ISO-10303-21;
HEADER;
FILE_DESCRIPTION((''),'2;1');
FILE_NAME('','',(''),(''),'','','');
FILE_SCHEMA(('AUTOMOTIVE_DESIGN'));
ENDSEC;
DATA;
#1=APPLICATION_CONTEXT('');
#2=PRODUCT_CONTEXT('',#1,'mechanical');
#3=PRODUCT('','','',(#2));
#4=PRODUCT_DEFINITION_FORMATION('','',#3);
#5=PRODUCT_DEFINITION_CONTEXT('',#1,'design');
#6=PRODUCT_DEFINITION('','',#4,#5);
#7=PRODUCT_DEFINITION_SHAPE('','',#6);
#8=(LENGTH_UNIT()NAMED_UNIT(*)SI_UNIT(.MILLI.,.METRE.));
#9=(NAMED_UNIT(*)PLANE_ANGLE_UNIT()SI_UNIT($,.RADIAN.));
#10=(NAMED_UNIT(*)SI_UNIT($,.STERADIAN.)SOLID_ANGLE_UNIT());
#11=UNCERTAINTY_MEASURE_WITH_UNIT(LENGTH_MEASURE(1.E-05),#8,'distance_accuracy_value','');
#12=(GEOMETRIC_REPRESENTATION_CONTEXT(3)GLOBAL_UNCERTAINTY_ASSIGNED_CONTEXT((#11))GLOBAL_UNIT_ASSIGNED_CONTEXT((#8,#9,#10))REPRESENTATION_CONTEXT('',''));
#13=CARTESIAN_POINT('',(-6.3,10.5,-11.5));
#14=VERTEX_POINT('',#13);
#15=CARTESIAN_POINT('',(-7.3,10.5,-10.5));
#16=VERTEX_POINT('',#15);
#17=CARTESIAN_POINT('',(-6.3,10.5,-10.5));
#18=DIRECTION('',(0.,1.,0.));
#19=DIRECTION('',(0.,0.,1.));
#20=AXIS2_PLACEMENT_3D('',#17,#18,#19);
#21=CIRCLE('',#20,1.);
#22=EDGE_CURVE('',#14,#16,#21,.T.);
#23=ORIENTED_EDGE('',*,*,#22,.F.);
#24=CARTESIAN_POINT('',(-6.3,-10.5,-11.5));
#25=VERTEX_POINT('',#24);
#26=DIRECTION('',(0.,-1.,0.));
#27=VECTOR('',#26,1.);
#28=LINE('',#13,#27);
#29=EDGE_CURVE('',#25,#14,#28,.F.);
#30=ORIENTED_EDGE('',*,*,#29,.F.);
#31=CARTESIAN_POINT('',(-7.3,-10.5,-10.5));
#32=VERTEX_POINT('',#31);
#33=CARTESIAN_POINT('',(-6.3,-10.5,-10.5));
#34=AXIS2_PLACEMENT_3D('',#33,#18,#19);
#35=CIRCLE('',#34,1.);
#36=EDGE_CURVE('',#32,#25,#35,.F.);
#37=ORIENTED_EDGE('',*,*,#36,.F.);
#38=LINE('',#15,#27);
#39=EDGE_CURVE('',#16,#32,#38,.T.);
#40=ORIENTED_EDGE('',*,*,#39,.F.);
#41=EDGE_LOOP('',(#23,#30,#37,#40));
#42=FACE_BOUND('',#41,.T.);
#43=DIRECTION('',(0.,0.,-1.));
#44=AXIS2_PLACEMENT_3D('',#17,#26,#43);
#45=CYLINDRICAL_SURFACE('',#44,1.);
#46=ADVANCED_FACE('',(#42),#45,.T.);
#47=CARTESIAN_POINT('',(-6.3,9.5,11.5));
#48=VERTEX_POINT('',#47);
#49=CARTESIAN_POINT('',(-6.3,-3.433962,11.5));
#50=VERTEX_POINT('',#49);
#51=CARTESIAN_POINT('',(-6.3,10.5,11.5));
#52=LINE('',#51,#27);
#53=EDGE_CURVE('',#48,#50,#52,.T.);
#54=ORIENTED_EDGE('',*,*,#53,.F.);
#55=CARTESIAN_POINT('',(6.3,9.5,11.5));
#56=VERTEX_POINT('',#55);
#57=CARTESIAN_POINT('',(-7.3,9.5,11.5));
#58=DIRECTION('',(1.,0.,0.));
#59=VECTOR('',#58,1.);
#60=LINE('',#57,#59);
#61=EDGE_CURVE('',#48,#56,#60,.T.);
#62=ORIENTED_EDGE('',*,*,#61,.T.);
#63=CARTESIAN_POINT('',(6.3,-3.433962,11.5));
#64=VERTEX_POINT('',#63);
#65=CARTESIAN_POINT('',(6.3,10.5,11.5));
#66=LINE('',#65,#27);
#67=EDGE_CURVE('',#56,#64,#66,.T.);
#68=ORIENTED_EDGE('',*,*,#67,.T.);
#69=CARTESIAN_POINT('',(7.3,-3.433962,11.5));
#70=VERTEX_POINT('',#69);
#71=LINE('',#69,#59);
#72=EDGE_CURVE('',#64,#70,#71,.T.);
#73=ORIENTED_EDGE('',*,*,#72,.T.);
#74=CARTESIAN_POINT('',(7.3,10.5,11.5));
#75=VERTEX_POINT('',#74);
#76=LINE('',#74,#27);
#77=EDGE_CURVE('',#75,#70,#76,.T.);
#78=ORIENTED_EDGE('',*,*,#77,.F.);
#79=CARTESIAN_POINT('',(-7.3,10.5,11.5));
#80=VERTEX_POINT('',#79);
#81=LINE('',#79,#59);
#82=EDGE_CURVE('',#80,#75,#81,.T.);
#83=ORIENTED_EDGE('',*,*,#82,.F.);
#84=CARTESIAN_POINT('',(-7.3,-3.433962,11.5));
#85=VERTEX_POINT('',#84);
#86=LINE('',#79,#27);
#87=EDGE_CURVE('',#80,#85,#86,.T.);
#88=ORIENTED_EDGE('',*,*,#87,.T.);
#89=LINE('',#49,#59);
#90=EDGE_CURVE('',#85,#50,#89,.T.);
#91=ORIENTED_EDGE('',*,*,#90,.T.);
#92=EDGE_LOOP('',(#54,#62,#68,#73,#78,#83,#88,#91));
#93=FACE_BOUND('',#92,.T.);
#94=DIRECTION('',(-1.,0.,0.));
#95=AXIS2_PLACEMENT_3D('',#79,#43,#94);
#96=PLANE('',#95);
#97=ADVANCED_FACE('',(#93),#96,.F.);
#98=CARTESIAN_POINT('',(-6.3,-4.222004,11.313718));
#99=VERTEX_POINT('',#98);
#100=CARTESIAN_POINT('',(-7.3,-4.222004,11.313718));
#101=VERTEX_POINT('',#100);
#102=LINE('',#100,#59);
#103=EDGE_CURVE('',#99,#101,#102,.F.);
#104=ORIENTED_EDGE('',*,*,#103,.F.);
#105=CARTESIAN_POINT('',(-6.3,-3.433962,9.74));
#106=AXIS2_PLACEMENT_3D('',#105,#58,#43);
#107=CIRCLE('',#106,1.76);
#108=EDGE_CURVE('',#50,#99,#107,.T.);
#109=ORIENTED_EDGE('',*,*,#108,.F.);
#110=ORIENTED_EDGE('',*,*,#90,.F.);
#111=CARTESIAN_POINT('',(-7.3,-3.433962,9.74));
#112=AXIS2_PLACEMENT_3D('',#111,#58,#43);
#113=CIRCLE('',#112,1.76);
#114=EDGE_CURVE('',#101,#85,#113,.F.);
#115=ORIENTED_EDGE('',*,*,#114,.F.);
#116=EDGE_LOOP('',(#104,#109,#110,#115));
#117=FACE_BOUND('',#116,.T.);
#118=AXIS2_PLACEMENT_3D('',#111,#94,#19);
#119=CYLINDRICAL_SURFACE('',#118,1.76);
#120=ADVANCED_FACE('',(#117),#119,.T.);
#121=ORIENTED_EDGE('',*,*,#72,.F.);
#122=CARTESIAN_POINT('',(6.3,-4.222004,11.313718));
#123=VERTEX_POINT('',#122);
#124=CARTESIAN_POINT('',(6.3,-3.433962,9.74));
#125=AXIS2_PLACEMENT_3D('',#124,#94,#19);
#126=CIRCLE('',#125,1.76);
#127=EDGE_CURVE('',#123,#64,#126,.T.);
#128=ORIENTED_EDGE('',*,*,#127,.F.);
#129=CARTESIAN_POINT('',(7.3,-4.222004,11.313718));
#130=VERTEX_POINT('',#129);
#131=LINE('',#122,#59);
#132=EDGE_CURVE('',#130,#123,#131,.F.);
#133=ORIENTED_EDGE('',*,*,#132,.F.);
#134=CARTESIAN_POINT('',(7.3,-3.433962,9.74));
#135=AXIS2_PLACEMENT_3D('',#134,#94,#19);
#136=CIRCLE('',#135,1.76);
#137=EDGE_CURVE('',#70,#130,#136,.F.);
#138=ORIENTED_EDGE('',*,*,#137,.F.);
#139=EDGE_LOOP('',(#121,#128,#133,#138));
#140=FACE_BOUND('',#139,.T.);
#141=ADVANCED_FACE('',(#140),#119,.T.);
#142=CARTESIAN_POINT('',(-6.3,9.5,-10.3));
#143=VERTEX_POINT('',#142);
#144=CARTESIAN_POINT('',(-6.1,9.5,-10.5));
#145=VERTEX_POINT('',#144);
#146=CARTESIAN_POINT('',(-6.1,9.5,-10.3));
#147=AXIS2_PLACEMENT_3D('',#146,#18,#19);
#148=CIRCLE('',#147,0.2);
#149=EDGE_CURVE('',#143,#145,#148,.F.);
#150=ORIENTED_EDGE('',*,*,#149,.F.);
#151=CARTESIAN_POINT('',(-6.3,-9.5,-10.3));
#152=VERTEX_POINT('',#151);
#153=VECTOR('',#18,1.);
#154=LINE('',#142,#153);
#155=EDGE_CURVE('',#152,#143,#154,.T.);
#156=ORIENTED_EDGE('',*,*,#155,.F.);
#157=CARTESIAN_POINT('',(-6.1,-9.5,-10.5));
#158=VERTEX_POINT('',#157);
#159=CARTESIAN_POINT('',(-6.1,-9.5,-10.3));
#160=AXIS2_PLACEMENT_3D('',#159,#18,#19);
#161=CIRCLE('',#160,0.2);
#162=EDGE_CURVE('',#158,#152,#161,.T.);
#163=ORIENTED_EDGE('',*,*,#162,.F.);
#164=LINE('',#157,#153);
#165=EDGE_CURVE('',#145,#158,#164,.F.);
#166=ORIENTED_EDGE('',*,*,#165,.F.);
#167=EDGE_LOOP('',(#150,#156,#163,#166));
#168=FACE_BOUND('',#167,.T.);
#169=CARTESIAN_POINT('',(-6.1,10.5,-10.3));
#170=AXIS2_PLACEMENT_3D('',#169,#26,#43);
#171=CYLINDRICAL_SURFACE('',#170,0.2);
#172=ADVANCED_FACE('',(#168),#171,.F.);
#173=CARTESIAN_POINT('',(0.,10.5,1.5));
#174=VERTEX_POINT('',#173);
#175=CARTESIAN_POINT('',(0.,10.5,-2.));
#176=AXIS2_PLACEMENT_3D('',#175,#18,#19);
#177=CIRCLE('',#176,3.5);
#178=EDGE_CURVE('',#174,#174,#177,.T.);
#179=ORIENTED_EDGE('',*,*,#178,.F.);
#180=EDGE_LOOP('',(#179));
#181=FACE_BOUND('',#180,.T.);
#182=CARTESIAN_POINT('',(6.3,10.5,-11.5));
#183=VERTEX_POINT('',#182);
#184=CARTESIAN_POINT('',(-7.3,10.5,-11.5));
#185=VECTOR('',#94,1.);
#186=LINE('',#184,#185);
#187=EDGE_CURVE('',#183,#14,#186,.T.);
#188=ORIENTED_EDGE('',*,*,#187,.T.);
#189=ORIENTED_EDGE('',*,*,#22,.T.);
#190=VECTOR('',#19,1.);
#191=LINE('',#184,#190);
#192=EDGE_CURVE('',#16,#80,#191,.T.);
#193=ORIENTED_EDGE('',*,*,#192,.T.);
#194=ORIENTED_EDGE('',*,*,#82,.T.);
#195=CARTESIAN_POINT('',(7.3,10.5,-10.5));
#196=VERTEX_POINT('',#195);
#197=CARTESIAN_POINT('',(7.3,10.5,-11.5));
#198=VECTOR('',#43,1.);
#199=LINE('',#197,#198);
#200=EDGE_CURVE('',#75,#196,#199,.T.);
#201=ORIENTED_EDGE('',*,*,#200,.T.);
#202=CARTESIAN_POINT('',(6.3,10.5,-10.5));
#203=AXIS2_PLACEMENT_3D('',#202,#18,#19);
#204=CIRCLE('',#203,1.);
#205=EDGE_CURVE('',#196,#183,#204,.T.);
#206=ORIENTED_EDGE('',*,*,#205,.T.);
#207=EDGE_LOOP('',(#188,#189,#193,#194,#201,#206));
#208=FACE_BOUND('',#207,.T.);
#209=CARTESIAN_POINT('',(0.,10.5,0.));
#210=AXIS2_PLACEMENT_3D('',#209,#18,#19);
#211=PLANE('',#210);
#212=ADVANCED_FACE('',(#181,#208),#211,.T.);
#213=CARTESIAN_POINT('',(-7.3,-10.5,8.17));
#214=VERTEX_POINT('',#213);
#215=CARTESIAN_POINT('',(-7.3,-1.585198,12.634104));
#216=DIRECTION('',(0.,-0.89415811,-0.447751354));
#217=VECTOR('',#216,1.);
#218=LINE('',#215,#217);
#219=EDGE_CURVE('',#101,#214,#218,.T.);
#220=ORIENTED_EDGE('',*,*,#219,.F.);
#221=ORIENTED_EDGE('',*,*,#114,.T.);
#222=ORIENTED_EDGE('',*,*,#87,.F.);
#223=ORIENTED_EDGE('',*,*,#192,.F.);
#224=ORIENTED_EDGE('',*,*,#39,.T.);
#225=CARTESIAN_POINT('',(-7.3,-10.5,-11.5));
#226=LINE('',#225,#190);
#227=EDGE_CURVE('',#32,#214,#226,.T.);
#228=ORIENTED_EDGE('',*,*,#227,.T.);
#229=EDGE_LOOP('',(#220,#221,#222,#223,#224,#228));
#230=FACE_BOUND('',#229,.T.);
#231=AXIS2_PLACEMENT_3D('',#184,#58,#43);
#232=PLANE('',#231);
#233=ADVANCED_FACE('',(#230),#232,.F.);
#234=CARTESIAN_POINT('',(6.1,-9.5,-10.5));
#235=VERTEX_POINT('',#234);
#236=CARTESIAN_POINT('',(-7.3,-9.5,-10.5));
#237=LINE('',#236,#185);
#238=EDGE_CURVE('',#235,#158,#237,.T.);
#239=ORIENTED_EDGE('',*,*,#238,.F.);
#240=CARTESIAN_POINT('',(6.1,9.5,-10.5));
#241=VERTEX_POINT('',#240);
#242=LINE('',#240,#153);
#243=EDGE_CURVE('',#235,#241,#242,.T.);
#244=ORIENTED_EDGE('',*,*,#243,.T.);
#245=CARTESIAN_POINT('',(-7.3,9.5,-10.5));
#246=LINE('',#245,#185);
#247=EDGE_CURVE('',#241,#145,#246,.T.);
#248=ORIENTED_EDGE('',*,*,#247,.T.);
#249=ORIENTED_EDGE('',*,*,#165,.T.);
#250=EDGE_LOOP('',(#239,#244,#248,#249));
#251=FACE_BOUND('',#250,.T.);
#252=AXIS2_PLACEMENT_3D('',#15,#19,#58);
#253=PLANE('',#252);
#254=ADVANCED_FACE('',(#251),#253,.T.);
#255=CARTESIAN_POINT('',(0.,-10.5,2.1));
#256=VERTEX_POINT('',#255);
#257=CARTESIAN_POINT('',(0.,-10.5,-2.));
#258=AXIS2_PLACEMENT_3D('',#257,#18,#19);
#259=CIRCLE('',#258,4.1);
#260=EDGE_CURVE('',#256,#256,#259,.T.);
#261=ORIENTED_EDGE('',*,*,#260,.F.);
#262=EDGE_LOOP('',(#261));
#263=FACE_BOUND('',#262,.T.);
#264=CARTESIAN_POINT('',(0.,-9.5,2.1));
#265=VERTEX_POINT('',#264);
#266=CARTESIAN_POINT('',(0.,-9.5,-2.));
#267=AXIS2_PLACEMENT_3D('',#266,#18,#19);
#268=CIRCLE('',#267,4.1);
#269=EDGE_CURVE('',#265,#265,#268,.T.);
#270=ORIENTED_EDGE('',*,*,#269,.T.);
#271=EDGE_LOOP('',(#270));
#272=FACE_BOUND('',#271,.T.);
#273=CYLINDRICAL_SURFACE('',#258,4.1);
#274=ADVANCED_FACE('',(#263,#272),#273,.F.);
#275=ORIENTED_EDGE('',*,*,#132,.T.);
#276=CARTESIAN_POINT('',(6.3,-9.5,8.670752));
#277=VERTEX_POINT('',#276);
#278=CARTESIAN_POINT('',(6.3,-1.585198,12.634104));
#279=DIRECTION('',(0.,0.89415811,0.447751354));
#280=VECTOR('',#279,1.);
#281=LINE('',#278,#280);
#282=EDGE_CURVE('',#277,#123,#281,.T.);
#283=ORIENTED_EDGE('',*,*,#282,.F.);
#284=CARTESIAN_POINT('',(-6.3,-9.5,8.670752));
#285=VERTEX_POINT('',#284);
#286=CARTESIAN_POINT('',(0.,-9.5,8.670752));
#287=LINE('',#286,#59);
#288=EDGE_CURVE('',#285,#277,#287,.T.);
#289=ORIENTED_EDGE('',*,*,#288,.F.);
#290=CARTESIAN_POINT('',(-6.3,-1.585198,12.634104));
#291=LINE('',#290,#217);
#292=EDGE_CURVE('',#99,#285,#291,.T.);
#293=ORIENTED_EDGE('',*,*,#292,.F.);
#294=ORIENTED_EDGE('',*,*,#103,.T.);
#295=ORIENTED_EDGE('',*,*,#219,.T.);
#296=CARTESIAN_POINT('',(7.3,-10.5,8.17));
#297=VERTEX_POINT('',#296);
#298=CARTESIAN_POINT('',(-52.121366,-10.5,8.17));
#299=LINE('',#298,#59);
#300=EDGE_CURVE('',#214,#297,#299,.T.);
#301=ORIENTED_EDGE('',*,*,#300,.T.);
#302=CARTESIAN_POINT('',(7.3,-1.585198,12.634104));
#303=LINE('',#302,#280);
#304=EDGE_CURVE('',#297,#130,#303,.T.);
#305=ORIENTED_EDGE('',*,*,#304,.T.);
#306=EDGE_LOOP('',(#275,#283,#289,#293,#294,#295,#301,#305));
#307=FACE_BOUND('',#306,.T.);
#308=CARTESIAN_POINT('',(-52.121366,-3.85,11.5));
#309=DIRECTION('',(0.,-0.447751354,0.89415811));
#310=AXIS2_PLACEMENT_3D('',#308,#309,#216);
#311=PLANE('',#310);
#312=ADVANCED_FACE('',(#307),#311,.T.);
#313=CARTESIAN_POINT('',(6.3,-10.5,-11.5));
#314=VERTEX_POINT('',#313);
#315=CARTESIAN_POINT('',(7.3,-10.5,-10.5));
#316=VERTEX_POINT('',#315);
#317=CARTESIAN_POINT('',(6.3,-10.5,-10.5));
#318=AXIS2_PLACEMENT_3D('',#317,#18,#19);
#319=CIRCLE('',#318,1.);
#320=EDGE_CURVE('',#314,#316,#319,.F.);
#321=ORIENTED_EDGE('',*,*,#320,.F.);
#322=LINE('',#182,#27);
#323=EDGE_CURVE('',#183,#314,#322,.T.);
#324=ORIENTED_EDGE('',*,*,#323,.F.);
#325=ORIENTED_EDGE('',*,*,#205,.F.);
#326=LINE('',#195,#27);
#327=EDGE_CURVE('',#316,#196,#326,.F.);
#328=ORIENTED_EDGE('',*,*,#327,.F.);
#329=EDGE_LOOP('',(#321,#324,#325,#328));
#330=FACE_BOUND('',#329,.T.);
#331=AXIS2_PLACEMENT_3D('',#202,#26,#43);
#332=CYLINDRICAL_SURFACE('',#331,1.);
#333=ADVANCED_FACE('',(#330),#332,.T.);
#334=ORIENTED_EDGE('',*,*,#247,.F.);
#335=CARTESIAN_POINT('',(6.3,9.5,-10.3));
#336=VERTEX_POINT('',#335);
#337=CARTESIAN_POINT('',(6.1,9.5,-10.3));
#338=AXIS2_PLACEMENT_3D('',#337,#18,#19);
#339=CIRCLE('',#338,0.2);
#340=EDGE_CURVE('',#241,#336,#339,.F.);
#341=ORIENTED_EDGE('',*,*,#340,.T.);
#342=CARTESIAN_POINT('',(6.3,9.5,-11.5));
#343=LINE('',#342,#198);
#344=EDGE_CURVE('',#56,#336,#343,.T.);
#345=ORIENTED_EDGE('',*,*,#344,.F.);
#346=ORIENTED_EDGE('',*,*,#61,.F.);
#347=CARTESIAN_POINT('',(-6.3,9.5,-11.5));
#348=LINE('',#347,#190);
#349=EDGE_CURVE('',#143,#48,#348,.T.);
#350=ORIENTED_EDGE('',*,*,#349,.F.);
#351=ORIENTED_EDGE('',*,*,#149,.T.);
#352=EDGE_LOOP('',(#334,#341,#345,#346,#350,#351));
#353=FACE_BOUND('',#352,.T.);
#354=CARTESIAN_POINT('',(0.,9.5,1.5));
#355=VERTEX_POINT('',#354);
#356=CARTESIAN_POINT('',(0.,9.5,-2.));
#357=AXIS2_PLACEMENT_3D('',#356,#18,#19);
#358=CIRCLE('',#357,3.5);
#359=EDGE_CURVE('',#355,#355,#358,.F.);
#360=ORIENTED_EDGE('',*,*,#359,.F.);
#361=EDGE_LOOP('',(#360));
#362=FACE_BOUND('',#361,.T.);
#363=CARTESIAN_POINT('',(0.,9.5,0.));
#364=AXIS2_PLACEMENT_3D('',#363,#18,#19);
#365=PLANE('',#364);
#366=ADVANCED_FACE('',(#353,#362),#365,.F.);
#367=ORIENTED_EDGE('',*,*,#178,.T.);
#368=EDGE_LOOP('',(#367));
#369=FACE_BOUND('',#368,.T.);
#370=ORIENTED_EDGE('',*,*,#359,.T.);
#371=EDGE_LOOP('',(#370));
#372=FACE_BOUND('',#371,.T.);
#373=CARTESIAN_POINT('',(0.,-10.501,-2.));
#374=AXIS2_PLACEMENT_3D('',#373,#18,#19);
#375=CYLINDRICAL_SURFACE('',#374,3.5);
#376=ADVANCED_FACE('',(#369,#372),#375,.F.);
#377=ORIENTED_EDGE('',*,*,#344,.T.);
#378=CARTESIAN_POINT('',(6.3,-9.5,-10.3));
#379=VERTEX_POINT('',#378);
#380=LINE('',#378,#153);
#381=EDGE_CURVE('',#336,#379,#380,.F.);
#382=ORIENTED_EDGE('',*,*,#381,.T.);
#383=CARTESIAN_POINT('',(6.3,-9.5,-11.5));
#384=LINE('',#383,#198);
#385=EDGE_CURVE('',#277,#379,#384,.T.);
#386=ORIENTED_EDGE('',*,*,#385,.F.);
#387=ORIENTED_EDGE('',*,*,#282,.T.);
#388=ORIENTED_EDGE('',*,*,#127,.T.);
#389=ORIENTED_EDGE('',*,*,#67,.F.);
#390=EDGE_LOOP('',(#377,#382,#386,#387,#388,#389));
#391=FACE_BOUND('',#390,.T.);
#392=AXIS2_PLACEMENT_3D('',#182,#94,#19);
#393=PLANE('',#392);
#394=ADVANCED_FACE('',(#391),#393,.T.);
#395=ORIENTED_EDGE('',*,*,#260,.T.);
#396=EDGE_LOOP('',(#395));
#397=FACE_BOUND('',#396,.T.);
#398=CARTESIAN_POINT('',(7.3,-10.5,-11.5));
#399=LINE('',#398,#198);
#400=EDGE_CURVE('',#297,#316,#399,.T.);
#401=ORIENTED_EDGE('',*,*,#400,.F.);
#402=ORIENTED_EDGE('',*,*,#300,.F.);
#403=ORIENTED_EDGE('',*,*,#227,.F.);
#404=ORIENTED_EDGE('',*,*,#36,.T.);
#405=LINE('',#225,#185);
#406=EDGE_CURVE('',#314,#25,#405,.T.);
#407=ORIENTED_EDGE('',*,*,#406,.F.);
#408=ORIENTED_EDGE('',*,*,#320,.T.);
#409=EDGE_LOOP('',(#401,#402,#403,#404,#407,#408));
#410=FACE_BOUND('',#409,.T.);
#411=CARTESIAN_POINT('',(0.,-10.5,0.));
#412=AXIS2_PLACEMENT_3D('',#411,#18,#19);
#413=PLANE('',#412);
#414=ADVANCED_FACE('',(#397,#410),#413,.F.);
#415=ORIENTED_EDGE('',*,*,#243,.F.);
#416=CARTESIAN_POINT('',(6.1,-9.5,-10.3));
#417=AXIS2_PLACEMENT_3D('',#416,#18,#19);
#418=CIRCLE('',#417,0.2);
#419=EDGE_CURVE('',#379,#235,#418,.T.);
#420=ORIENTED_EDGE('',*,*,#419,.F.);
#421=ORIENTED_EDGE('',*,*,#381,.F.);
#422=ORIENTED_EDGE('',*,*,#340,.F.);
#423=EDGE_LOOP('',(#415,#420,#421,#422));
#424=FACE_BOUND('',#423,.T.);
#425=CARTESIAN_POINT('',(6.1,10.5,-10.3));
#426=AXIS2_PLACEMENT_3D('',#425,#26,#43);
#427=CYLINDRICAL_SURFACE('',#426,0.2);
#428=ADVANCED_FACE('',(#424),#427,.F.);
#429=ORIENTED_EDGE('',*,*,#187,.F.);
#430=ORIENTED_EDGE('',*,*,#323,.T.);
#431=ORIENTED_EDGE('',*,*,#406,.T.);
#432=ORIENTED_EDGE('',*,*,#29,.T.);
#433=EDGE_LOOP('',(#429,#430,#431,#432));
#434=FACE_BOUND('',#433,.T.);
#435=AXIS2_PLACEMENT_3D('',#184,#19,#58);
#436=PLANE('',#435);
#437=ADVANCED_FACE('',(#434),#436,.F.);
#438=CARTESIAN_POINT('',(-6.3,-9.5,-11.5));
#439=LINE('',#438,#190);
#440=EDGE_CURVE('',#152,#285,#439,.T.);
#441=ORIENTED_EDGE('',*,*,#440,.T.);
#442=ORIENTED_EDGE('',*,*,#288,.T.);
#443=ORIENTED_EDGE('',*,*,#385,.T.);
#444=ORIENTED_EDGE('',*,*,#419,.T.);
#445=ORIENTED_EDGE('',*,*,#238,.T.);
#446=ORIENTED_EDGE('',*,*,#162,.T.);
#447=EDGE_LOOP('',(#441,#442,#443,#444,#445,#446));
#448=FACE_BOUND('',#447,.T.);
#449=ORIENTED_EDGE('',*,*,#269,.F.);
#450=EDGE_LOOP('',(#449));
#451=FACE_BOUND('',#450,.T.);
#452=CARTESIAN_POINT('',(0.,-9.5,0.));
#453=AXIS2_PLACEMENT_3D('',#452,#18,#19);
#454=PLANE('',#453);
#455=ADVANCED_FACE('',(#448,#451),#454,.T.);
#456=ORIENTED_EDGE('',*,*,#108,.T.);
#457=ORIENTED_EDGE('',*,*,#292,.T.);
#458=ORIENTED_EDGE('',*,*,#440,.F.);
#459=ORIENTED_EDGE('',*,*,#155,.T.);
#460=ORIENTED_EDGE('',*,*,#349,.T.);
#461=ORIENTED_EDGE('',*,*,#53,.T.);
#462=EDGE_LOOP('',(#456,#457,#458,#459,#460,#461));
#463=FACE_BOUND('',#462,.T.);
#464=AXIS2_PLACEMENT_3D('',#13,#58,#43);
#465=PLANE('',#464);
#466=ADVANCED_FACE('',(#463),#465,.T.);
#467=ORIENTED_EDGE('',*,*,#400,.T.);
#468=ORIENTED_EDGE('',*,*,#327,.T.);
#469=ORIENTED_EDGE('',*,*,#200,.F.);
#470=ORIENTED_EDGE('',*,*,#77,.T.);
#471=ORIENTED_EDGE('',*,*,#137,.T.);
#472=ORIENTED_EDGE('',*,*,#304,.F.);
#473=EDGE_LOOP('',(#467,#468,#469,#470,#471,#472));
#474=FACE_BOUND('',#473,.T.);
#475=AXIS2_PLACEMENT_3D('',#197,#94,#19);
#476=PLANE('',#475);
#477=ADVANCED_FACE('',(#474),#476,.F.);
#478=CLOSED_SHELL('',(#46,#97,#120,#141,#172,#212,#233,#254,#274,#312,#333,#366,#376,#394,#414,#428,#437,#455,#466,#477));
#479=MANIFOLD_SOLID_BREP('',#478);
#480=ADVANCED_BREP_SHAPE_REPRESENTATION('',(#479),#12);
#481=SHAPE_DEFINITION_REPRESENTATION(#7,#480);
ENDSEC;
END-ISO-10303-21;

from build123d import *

# Parameters (mm, degrees)
MAINBODYS_W          = 14.6
MAINBODYS_H          = 23
MAIN_BODY_DEPTH      = 10.5
MB_FILLET_R          = 1
SHELL_START          = -6.3
SHELL_MB_OUTLINE_W   = 19
SHELL_MB_OUTLINE_H   = 22
SHELL_MB_DEPTH       = 12.6
TOP_BORE_REACH       = 27.031
TOPBORES_R           = 3.5
BOTTOMBORES_R        = 4.1
BOTTOM_BORE_DEPTH    = 25.197933796
ANGLEDCUT_DEPTH      = 18.19854645
ANGLEDCUT_DEPTH_BACK = 18.19854645
MB_INNER_FILLET_R    = 0.2
AC_F_R               = 1.76


# Read off the part's stored shape, not the designer's step: SHELL MB
with BuildPart() as part:
    # MainBodyS → MAIN BODY (new, symmetric)
    with BuildSketch(Plane(origin=(0, 0, 0), x_dir=(1, 0, 0), z_dir=(0, 1, 0))):
        Rectangle(MAINBODYS_W, MAINBODYS_H)
    extrude(amount=MAIN_BODY_DEPTH, both=True)

    # MB FILLET
    mb_fillet_edges = [part.edges().sort_by_distance(p)[0] for p in [
        (-7.3, 0, -11.5),
        (7.3, 0, -11.5),
    ]]
    fillet(mb_fillet_edges, radius=MB_FILLET_R)

    # SHELL MB outline → SHELL MB (cut)
    with BuildSketch(Plane.YZ.offset(SHELL_START)):
        with Locations((0, 0.5)):
            Rectangle(SHELL_MB_OUTLINE_W, SHELL_MB_OUTLINE_H)
    extrude(amount=SHELL_MB_DEPTH, mode=Mode.SUBTRACT)

    # TopBoreS → TOP BORE (cut, up to next)
    with BuildSketch(Plane(origin=(0, 10.5, 0), x_dir=(1, 0, 0), z_dir=(0, 1, 0)), mode=Mode.PRIVATE) as top_bore_sk1:
        with Locations(Location((0, 2, 0), (0, 0, 270))):
            Circle(TOPBORES_R)
    top_bore_tool1 = extrude(top_bore_sk1.sketch, amount=-TOP_BORE_REACH, mode=Mode.PRIVATE) & part.part
    add(top_bore_tool1.solids().sort_by_distance((0, 10.5, -2))[0], mode=Mode.SUBTRACT)

    # BottomBoreS → BOTTOM BORE (cut, through all)
    with BuildSketch(Plane(origin=(0, -9.5, 0), x_dir=(1, 0, 0), z_dir=(0, 1, 0))):
        with Locations(Location((0, 2, 0), (0, 0, 270))):
            Circle(BOTTOMBORES_R)
    extrude(amount=-BOTTOM_BORE_DEPTH, mode=Mode.SUBTRACT)

    # AngledCutS → AngledCut (cut, two sides: drawn at the far end of the back side and taken through both)
    with BuildSketch(Plane(origin=(0, 0, 0), x_dir=(0, 0, -1), z_dir=(1, 0, 0)).offset(-ANGLEDCUT_DEPTH_BACK)):
        Polygon((-41.74417665, 56.547529947), (-11.5, -3.85), (-8.17, -10.5), (22.07417665, -70.897529947), (-98.720883244, -131.385883248), (-162.539236545, -3.940823353), align=None)
    extrude(amount=ANGLEDCUT_DEPTH + ANGLEDCUT_DEPTH_BACK, mode=Mode.SUBTRACT)

    # MB INNER FILLET
    mb_inner_fillet_edges = [part.edges().sort_by_distance(p)[0] for p in [
        (6.3, 0, -10.5),
        (-6.3, 0, -10.5),
    ]]
    fillet(mb_inner_fillet_edges, radius=MB_INNER_FILLET_R)

    # AC F
    ac_f_edges = [part.edges().sort_by_distance(p)[0] for p in [
        (-6.8, -3.85, 11.5),
        (6.8, -3.85, 11.5),
    ]]
    fillet(ac_f_edges, radius=AC_F_R)


solid = part.part
